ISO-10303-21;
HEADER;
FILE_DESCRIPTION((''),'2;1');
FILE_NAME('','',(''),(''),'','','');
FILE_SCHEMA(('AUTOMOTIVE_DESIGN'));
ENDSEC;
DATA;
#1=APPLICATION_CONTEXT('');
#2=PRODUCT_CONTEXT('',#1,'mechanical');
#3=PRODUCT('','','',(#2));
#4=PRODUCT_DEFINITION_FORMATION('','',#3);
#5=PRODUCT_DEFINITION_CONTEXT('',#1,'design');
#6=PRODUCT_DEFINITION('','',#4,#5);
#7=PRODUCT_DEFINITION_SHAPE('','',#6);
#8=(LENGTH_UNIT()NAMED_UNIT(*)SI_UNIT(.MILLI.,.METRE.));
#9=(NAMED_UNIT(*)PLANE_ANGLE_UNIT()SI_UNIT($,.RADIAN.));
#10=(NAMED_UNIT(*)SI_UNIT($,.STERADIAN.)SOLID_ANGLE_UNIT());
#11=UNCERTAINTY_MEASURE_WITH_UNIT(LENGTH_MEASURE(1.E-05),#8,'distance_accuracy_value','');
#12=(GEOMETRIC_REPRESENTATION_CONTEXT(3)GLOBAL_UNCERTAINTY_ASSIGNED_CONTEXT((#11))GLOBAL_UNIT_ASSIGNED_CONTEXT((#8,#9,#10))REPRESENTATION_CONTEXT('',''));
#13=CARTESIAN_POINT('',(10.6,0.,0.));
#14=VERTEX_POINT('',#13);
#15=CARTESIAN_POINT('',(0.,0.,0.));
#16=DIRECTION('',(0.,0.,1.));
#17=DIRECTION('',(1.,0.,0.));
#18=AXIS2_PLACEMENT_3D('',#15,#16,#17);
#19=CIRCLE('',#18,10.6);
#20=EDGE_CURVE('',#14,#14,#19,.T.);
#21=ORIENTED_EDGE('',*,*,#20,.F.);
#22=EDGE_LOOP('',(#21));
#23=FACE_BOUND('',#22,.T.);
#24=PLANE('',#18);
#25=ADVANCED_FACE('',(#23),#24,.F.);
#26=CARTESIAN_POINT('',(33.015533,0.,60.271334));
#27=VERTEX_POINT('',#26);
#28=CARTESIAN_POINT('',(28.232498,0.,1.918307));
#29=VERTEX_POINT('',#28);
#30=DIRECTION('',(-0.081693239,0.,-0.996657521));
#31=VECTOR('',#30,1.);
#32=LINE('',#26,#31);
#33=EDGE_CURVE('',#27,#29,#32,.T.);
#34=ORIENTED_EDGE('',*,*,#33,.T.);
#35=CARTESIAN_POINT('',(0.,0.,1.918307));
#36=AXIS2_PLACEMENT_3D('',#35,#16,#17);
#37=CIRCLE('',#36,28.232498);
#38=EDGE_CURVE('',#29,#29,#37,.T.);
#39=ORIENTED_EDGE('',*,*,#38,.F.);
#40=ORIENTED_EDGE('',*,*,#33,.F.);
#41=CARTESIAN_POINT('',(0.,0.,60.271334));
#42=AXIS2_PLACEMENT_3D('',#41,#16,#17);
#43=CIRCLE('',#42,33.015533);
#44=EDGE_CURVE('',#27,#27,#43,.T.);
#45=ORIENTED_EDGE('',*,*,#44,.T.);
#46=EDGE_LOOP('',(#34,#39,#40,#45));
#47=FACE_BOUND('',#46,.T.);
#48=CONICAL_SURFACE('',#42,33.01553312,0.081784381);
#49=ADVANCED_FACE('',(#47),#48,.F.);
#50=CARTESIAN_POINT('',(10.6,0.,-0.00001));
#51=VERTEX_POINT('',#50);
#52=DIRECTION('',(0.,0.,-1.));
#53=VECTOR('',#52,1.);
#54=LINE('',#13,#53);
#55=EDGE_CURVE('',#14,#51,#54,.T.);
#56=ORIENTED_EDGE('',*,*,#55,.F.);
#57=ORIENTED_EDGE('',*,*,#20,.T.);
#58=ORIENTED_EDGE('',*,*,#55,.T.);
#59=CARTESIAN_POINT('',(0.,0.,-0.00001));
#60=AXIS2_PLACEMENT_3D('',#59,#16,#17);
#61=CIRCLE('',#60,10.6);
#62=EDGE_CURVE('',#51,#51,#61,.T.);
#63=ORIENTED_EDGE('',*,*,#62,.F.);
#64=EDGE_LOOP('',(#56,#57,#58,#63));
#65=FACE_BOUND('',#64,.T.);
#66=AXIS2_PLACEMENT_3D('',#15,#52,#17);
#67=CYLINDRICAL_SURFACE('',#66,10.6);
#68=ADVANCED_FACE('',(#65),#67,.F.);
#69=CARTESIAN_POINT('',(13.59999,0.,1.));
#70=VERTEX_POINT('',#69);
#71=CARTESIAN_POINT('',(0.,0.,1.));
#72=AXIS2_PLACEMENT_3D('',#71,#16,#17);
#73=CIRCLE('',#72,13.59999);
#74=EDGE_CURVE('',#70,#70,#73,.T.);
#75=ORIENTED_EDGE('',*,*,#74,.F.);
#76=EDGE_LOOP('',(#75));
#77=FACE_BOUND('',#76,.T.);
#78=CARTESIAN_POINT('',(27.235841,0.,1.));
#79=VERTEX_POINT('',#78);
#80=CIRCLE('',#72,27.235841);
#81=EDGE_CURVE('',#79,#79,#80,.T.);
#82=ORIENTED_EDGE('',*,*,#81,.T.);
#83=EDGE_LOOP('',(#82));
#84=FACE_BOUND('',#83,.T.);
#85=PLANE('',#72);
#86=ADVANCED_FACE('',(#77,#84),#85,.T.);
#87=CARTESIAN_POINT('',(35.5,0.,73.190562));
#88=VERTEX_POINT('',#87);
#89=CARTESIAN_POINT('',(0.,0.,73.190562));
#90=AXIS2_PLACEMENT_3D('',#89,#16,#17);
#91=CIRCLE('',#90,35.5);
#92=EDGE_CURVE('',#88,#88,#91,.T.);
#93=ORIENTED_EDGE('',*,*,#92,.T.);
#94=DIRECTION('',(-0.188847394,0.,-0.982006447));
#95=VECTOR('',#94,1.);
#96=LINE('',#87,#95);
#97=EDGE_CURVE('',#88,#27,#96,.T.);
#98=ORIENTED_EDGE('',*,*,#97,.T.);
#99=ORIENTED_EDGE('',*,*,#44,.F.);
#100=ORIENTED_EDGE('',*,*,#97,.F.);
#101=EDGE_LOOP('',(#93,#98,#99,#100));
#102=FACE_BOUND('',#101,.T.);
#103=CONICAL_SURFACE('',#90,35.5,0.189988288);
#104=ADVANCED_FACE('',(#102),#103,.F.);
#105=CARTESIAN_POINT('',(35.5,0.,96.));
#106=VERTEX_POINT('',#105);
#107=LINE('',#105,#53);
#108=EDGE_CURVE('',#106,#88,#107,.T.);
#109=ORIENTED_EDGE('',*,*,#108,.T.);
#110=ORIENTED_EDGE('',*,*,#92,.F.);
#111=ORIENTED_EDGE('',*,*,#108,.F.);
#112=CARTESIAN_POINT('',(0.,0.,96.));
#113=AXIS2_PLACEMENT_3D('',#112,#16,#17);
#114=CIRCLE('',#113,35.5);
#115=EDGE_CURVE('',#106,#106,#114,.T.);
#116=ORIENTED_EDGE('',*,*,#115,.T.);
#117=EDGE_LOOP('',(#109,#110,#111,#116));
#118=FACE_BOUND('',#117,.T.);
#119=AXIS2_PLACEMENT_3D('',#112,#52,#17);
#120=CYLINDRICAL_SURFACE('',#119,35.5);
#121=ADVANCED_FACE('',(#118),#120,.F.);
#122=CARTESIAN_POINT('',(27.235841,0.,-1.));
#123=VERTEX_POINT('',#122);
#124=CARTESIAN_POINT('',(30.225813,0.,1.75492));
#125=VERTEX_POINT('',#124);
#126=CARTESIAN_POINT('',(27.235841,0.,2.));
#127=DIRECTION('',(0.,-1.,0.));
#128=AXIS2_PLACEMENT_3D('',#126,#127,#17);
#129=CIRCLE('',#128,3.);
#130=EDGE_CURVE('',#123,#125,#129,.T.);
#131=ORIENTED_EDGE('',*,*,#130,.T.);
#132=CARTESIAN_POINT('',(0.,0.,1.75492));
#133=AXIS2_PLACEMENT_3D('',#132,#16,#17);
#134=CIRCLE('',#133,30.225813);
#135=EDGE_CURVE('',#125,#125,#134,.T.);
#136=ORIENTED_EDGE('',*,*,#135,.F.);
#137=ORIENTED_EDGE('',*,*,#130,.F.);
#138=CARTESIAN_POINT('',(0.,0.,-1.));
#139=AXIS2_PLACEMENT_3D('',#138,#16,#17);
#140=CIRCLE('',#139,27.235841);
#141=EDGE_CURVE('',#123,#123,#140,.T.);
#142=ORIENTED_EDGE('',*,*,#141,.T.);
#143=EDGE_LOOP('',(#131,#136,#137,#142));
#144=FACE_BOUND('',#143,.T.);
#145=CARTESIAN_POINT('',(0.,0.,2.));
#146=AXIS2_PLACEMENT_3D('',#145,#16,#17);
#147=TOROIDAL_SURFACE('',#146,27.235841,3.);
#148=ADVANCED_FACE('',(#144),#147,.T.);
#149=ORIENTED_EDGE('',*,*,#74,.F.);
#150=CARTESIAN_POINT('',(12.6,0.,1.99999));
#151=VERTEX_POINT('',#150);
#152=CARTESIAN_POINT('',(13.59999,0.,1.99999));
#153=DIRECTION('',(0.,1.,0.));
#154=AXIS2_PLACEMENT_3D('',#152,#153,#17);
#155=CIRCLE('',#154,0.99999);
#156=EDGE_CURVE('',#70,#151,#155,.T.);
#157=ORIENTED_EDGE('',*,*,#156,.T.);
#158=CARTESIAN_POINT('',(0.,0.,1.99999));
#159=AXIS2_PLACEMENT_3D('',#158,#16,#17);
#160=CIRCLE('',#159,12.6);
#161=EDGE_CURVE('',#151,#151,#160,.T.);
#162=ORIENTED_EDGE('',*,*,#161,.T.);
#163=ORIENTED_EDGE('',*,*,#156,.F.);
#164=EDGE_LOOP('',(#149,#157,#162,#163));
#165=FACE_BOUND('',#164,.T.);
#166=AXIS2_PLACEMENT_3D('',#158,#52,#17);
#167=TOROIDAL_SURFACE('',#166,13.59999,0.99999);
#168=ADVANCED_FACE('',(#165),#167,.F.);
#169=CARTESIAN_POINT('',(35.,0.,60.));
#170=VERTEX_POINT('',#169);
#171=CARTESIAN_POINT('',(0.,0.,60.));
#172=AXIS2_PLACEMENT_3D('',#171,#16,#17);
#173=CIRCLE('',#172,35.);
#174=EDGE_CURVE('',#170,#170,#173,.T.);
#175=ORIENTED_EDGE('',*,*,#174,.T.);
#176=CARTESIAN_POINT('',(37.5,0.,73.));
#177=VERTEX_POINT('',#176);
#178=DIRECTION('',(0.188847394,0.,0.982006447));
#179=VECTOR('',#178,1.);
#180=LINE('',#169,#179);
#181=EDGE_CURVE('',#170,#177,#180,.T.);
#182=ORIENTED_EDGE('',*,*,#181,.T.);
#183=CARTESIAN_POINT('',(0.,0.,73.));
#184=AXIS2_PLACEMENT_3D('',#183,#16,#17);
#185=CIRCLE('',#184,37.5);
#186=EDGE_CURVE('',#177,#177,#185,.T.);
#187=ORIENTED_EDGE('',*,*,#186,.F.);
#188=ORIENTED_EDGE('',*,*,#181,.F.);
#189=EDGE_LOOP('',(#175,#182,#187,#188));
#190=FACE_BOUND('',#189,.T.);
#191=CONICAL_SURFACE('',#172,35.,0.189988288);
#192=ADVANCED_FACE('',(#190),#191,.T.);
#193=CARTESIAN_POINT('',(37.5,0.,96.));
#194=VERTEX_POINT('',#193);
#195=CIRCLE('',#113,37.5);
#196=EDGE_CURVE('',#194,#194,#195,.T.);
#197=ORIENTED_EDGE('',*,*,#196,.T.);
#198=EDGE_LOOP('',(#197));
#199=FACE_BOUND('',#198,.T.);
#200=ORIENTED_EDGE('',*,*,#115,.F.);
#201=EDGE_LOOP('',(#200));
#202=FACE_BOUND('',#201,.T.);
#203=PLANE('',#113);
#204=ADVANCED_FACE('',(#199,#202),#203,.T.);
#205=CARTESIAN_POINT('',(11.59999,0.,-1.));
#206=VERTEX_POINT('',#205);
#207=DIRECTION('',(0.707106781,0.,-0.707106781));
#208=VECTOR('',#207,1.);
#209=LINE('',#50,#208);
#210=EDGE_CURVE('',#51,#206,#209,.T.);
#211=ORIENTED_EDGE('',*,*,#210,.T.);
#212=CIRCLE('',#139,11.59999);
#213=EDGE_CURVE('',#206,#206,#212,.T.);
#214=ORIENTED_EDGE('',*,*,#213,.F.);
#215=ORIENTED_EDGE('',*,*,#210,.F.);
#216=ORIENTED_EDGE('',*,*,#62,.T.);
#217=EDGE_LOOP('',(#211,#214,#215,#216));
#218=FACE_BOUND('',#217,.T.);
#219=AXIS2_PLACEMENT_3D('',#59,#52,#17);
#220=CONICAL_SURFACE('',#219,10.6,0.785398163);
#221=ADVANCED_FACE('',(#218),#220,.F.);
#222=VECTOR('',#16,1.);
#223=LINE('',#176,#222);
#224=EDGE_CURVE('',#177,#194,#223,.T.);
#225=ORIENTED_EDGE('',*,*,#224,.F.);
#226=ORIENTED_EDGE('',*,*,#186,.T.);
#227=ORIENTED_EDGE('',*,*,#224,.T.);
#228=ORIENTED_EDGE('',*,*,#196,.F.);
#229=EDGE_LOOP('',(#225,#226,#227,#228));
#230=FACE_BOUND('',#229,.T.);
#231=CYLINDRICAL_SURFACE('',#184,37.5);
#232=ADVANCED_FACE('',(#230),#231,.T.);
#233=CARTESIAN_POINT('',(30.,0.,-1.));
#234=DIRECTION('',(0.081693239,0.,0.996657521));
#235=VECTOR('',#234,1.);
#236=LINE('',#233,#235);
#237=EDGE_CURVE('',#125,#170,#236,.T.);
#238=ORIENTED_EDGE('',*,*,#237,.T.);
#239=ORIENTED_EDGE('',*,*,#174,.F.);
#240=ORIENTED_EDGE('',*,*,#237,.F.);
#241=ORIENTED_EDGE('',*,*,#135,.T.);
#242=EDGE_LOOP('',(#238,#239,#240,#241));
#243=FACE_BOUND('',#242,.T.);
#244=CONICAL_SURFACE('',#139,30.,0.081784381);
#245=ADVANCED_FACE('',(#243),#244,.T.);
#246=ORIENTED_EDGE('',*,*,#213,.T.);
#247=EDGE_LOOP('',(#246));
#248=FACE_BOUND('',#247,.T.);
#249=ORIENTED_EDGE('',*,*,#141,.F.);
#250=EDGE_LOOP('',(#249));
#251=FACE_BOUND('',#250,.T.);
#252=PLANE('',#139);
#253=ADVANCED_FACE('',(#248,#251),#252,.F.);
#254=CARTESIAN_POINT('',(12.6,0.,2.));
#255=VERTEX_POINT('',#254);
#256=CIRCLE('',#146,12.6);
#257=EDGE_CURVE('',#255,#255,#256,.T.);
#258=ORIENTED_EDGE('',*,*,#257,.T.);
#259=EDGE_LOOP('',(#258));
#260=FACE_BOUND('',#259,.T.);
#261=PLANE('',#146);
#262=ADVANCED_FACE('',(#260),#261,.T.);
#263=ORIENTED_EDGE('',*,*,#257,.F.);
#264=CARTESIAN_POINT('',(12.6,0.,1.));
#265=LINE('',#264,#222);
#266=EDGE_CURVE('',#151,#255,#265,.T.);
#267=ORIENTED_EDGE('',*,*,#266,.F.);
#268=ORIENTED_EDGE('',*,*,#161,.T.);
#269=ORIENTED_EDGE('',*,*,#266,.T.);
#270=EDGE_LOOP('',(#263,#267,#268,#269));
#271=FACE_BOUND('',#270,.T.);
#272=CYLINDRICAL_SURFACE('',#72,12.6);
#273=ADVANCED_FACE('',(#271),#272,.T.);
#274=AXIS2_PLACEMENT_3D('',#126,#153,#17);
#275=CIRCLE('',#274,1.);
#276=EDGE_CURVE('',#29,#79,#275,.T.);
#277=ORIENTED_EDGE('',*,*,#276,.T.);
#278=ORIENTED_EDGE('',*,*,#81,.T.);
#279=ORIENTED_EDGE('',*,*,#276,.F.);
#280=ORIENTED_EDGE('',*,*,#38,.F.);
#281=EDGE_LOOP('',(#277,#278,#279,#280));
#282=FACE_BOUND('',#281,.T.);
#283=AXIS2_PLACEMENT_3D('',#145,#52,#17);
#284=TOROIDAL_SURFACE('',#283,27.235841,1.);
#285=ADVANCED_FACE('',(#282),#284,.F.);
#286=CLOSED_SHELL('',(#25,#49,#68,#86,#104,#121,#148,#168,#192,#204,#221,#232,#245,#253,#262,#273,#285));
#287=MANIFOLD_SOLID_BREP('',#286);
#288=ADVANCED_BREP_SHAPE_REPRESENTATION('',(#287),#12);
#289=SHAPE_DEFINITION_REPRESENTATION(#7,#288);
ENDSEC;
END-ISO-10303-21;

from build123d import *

# Parameters (mm, degrees)
F2_SIZE = 0.99999
F3_R    = 3
F4_R    = 1
F5_R    = 0.99999


# Not quite as in the source:
# - a fillet or chamfer is up to 0.001 mm smaller than in the source, because OpenCascade refuses the exact size


with BuildPart() as f1:
    # F0 (on Front) → F1 (revolve)
    with BuildSketch(Plane.XZ):
        Polygon((0, 2), (0, 0), (10.6, 0), (10.6, -1), (30, -1), (35, 60), (37.5, 73), (37.5, 96), (35.5, 96), (35.5, 73.1905618359), (33.0155331198, 60.2713340591), (28.1572270494, 1), (12.6, 1), (12.6, 2), align=None)
    revolve(axis=Axis((0, 0, 49), (0, 0, 1)))

    # F2 (size 1 in the source; OpenCascade refuses exactly that, so slightly less here)
    f2_edges = [f1.edges().sort_by_distance(p)[0] for p in [
        (-10.6, 0, -1),
    ]]
    chamfer(f2_edges, length=F2_SIZE)

    # F3
    f3_edges = [f1.edges().sort_by_distance(p)[0] for p in [
        (-30, 0, -1),
    ]]
    fillet(f3_edges, radius=F3_R)

    # F4
    f4_edges = [f1.edges().sort_by_distance(p)[0] for p in [
        (-28.157227, 0, 1),
    ]]
    fillet(f4_edges, radius=F4_R)

    # F5 (radius 1 in the source; OpenCascade refuses exactly that, so slightly less here)
    f5_edges = [f1.edges().sort_by_distance(p)[0] for p in [
        (-12.6, 0, 1),
    ]]
    fillet(f5_edges, radius=F5_R)


solid = f1.part
